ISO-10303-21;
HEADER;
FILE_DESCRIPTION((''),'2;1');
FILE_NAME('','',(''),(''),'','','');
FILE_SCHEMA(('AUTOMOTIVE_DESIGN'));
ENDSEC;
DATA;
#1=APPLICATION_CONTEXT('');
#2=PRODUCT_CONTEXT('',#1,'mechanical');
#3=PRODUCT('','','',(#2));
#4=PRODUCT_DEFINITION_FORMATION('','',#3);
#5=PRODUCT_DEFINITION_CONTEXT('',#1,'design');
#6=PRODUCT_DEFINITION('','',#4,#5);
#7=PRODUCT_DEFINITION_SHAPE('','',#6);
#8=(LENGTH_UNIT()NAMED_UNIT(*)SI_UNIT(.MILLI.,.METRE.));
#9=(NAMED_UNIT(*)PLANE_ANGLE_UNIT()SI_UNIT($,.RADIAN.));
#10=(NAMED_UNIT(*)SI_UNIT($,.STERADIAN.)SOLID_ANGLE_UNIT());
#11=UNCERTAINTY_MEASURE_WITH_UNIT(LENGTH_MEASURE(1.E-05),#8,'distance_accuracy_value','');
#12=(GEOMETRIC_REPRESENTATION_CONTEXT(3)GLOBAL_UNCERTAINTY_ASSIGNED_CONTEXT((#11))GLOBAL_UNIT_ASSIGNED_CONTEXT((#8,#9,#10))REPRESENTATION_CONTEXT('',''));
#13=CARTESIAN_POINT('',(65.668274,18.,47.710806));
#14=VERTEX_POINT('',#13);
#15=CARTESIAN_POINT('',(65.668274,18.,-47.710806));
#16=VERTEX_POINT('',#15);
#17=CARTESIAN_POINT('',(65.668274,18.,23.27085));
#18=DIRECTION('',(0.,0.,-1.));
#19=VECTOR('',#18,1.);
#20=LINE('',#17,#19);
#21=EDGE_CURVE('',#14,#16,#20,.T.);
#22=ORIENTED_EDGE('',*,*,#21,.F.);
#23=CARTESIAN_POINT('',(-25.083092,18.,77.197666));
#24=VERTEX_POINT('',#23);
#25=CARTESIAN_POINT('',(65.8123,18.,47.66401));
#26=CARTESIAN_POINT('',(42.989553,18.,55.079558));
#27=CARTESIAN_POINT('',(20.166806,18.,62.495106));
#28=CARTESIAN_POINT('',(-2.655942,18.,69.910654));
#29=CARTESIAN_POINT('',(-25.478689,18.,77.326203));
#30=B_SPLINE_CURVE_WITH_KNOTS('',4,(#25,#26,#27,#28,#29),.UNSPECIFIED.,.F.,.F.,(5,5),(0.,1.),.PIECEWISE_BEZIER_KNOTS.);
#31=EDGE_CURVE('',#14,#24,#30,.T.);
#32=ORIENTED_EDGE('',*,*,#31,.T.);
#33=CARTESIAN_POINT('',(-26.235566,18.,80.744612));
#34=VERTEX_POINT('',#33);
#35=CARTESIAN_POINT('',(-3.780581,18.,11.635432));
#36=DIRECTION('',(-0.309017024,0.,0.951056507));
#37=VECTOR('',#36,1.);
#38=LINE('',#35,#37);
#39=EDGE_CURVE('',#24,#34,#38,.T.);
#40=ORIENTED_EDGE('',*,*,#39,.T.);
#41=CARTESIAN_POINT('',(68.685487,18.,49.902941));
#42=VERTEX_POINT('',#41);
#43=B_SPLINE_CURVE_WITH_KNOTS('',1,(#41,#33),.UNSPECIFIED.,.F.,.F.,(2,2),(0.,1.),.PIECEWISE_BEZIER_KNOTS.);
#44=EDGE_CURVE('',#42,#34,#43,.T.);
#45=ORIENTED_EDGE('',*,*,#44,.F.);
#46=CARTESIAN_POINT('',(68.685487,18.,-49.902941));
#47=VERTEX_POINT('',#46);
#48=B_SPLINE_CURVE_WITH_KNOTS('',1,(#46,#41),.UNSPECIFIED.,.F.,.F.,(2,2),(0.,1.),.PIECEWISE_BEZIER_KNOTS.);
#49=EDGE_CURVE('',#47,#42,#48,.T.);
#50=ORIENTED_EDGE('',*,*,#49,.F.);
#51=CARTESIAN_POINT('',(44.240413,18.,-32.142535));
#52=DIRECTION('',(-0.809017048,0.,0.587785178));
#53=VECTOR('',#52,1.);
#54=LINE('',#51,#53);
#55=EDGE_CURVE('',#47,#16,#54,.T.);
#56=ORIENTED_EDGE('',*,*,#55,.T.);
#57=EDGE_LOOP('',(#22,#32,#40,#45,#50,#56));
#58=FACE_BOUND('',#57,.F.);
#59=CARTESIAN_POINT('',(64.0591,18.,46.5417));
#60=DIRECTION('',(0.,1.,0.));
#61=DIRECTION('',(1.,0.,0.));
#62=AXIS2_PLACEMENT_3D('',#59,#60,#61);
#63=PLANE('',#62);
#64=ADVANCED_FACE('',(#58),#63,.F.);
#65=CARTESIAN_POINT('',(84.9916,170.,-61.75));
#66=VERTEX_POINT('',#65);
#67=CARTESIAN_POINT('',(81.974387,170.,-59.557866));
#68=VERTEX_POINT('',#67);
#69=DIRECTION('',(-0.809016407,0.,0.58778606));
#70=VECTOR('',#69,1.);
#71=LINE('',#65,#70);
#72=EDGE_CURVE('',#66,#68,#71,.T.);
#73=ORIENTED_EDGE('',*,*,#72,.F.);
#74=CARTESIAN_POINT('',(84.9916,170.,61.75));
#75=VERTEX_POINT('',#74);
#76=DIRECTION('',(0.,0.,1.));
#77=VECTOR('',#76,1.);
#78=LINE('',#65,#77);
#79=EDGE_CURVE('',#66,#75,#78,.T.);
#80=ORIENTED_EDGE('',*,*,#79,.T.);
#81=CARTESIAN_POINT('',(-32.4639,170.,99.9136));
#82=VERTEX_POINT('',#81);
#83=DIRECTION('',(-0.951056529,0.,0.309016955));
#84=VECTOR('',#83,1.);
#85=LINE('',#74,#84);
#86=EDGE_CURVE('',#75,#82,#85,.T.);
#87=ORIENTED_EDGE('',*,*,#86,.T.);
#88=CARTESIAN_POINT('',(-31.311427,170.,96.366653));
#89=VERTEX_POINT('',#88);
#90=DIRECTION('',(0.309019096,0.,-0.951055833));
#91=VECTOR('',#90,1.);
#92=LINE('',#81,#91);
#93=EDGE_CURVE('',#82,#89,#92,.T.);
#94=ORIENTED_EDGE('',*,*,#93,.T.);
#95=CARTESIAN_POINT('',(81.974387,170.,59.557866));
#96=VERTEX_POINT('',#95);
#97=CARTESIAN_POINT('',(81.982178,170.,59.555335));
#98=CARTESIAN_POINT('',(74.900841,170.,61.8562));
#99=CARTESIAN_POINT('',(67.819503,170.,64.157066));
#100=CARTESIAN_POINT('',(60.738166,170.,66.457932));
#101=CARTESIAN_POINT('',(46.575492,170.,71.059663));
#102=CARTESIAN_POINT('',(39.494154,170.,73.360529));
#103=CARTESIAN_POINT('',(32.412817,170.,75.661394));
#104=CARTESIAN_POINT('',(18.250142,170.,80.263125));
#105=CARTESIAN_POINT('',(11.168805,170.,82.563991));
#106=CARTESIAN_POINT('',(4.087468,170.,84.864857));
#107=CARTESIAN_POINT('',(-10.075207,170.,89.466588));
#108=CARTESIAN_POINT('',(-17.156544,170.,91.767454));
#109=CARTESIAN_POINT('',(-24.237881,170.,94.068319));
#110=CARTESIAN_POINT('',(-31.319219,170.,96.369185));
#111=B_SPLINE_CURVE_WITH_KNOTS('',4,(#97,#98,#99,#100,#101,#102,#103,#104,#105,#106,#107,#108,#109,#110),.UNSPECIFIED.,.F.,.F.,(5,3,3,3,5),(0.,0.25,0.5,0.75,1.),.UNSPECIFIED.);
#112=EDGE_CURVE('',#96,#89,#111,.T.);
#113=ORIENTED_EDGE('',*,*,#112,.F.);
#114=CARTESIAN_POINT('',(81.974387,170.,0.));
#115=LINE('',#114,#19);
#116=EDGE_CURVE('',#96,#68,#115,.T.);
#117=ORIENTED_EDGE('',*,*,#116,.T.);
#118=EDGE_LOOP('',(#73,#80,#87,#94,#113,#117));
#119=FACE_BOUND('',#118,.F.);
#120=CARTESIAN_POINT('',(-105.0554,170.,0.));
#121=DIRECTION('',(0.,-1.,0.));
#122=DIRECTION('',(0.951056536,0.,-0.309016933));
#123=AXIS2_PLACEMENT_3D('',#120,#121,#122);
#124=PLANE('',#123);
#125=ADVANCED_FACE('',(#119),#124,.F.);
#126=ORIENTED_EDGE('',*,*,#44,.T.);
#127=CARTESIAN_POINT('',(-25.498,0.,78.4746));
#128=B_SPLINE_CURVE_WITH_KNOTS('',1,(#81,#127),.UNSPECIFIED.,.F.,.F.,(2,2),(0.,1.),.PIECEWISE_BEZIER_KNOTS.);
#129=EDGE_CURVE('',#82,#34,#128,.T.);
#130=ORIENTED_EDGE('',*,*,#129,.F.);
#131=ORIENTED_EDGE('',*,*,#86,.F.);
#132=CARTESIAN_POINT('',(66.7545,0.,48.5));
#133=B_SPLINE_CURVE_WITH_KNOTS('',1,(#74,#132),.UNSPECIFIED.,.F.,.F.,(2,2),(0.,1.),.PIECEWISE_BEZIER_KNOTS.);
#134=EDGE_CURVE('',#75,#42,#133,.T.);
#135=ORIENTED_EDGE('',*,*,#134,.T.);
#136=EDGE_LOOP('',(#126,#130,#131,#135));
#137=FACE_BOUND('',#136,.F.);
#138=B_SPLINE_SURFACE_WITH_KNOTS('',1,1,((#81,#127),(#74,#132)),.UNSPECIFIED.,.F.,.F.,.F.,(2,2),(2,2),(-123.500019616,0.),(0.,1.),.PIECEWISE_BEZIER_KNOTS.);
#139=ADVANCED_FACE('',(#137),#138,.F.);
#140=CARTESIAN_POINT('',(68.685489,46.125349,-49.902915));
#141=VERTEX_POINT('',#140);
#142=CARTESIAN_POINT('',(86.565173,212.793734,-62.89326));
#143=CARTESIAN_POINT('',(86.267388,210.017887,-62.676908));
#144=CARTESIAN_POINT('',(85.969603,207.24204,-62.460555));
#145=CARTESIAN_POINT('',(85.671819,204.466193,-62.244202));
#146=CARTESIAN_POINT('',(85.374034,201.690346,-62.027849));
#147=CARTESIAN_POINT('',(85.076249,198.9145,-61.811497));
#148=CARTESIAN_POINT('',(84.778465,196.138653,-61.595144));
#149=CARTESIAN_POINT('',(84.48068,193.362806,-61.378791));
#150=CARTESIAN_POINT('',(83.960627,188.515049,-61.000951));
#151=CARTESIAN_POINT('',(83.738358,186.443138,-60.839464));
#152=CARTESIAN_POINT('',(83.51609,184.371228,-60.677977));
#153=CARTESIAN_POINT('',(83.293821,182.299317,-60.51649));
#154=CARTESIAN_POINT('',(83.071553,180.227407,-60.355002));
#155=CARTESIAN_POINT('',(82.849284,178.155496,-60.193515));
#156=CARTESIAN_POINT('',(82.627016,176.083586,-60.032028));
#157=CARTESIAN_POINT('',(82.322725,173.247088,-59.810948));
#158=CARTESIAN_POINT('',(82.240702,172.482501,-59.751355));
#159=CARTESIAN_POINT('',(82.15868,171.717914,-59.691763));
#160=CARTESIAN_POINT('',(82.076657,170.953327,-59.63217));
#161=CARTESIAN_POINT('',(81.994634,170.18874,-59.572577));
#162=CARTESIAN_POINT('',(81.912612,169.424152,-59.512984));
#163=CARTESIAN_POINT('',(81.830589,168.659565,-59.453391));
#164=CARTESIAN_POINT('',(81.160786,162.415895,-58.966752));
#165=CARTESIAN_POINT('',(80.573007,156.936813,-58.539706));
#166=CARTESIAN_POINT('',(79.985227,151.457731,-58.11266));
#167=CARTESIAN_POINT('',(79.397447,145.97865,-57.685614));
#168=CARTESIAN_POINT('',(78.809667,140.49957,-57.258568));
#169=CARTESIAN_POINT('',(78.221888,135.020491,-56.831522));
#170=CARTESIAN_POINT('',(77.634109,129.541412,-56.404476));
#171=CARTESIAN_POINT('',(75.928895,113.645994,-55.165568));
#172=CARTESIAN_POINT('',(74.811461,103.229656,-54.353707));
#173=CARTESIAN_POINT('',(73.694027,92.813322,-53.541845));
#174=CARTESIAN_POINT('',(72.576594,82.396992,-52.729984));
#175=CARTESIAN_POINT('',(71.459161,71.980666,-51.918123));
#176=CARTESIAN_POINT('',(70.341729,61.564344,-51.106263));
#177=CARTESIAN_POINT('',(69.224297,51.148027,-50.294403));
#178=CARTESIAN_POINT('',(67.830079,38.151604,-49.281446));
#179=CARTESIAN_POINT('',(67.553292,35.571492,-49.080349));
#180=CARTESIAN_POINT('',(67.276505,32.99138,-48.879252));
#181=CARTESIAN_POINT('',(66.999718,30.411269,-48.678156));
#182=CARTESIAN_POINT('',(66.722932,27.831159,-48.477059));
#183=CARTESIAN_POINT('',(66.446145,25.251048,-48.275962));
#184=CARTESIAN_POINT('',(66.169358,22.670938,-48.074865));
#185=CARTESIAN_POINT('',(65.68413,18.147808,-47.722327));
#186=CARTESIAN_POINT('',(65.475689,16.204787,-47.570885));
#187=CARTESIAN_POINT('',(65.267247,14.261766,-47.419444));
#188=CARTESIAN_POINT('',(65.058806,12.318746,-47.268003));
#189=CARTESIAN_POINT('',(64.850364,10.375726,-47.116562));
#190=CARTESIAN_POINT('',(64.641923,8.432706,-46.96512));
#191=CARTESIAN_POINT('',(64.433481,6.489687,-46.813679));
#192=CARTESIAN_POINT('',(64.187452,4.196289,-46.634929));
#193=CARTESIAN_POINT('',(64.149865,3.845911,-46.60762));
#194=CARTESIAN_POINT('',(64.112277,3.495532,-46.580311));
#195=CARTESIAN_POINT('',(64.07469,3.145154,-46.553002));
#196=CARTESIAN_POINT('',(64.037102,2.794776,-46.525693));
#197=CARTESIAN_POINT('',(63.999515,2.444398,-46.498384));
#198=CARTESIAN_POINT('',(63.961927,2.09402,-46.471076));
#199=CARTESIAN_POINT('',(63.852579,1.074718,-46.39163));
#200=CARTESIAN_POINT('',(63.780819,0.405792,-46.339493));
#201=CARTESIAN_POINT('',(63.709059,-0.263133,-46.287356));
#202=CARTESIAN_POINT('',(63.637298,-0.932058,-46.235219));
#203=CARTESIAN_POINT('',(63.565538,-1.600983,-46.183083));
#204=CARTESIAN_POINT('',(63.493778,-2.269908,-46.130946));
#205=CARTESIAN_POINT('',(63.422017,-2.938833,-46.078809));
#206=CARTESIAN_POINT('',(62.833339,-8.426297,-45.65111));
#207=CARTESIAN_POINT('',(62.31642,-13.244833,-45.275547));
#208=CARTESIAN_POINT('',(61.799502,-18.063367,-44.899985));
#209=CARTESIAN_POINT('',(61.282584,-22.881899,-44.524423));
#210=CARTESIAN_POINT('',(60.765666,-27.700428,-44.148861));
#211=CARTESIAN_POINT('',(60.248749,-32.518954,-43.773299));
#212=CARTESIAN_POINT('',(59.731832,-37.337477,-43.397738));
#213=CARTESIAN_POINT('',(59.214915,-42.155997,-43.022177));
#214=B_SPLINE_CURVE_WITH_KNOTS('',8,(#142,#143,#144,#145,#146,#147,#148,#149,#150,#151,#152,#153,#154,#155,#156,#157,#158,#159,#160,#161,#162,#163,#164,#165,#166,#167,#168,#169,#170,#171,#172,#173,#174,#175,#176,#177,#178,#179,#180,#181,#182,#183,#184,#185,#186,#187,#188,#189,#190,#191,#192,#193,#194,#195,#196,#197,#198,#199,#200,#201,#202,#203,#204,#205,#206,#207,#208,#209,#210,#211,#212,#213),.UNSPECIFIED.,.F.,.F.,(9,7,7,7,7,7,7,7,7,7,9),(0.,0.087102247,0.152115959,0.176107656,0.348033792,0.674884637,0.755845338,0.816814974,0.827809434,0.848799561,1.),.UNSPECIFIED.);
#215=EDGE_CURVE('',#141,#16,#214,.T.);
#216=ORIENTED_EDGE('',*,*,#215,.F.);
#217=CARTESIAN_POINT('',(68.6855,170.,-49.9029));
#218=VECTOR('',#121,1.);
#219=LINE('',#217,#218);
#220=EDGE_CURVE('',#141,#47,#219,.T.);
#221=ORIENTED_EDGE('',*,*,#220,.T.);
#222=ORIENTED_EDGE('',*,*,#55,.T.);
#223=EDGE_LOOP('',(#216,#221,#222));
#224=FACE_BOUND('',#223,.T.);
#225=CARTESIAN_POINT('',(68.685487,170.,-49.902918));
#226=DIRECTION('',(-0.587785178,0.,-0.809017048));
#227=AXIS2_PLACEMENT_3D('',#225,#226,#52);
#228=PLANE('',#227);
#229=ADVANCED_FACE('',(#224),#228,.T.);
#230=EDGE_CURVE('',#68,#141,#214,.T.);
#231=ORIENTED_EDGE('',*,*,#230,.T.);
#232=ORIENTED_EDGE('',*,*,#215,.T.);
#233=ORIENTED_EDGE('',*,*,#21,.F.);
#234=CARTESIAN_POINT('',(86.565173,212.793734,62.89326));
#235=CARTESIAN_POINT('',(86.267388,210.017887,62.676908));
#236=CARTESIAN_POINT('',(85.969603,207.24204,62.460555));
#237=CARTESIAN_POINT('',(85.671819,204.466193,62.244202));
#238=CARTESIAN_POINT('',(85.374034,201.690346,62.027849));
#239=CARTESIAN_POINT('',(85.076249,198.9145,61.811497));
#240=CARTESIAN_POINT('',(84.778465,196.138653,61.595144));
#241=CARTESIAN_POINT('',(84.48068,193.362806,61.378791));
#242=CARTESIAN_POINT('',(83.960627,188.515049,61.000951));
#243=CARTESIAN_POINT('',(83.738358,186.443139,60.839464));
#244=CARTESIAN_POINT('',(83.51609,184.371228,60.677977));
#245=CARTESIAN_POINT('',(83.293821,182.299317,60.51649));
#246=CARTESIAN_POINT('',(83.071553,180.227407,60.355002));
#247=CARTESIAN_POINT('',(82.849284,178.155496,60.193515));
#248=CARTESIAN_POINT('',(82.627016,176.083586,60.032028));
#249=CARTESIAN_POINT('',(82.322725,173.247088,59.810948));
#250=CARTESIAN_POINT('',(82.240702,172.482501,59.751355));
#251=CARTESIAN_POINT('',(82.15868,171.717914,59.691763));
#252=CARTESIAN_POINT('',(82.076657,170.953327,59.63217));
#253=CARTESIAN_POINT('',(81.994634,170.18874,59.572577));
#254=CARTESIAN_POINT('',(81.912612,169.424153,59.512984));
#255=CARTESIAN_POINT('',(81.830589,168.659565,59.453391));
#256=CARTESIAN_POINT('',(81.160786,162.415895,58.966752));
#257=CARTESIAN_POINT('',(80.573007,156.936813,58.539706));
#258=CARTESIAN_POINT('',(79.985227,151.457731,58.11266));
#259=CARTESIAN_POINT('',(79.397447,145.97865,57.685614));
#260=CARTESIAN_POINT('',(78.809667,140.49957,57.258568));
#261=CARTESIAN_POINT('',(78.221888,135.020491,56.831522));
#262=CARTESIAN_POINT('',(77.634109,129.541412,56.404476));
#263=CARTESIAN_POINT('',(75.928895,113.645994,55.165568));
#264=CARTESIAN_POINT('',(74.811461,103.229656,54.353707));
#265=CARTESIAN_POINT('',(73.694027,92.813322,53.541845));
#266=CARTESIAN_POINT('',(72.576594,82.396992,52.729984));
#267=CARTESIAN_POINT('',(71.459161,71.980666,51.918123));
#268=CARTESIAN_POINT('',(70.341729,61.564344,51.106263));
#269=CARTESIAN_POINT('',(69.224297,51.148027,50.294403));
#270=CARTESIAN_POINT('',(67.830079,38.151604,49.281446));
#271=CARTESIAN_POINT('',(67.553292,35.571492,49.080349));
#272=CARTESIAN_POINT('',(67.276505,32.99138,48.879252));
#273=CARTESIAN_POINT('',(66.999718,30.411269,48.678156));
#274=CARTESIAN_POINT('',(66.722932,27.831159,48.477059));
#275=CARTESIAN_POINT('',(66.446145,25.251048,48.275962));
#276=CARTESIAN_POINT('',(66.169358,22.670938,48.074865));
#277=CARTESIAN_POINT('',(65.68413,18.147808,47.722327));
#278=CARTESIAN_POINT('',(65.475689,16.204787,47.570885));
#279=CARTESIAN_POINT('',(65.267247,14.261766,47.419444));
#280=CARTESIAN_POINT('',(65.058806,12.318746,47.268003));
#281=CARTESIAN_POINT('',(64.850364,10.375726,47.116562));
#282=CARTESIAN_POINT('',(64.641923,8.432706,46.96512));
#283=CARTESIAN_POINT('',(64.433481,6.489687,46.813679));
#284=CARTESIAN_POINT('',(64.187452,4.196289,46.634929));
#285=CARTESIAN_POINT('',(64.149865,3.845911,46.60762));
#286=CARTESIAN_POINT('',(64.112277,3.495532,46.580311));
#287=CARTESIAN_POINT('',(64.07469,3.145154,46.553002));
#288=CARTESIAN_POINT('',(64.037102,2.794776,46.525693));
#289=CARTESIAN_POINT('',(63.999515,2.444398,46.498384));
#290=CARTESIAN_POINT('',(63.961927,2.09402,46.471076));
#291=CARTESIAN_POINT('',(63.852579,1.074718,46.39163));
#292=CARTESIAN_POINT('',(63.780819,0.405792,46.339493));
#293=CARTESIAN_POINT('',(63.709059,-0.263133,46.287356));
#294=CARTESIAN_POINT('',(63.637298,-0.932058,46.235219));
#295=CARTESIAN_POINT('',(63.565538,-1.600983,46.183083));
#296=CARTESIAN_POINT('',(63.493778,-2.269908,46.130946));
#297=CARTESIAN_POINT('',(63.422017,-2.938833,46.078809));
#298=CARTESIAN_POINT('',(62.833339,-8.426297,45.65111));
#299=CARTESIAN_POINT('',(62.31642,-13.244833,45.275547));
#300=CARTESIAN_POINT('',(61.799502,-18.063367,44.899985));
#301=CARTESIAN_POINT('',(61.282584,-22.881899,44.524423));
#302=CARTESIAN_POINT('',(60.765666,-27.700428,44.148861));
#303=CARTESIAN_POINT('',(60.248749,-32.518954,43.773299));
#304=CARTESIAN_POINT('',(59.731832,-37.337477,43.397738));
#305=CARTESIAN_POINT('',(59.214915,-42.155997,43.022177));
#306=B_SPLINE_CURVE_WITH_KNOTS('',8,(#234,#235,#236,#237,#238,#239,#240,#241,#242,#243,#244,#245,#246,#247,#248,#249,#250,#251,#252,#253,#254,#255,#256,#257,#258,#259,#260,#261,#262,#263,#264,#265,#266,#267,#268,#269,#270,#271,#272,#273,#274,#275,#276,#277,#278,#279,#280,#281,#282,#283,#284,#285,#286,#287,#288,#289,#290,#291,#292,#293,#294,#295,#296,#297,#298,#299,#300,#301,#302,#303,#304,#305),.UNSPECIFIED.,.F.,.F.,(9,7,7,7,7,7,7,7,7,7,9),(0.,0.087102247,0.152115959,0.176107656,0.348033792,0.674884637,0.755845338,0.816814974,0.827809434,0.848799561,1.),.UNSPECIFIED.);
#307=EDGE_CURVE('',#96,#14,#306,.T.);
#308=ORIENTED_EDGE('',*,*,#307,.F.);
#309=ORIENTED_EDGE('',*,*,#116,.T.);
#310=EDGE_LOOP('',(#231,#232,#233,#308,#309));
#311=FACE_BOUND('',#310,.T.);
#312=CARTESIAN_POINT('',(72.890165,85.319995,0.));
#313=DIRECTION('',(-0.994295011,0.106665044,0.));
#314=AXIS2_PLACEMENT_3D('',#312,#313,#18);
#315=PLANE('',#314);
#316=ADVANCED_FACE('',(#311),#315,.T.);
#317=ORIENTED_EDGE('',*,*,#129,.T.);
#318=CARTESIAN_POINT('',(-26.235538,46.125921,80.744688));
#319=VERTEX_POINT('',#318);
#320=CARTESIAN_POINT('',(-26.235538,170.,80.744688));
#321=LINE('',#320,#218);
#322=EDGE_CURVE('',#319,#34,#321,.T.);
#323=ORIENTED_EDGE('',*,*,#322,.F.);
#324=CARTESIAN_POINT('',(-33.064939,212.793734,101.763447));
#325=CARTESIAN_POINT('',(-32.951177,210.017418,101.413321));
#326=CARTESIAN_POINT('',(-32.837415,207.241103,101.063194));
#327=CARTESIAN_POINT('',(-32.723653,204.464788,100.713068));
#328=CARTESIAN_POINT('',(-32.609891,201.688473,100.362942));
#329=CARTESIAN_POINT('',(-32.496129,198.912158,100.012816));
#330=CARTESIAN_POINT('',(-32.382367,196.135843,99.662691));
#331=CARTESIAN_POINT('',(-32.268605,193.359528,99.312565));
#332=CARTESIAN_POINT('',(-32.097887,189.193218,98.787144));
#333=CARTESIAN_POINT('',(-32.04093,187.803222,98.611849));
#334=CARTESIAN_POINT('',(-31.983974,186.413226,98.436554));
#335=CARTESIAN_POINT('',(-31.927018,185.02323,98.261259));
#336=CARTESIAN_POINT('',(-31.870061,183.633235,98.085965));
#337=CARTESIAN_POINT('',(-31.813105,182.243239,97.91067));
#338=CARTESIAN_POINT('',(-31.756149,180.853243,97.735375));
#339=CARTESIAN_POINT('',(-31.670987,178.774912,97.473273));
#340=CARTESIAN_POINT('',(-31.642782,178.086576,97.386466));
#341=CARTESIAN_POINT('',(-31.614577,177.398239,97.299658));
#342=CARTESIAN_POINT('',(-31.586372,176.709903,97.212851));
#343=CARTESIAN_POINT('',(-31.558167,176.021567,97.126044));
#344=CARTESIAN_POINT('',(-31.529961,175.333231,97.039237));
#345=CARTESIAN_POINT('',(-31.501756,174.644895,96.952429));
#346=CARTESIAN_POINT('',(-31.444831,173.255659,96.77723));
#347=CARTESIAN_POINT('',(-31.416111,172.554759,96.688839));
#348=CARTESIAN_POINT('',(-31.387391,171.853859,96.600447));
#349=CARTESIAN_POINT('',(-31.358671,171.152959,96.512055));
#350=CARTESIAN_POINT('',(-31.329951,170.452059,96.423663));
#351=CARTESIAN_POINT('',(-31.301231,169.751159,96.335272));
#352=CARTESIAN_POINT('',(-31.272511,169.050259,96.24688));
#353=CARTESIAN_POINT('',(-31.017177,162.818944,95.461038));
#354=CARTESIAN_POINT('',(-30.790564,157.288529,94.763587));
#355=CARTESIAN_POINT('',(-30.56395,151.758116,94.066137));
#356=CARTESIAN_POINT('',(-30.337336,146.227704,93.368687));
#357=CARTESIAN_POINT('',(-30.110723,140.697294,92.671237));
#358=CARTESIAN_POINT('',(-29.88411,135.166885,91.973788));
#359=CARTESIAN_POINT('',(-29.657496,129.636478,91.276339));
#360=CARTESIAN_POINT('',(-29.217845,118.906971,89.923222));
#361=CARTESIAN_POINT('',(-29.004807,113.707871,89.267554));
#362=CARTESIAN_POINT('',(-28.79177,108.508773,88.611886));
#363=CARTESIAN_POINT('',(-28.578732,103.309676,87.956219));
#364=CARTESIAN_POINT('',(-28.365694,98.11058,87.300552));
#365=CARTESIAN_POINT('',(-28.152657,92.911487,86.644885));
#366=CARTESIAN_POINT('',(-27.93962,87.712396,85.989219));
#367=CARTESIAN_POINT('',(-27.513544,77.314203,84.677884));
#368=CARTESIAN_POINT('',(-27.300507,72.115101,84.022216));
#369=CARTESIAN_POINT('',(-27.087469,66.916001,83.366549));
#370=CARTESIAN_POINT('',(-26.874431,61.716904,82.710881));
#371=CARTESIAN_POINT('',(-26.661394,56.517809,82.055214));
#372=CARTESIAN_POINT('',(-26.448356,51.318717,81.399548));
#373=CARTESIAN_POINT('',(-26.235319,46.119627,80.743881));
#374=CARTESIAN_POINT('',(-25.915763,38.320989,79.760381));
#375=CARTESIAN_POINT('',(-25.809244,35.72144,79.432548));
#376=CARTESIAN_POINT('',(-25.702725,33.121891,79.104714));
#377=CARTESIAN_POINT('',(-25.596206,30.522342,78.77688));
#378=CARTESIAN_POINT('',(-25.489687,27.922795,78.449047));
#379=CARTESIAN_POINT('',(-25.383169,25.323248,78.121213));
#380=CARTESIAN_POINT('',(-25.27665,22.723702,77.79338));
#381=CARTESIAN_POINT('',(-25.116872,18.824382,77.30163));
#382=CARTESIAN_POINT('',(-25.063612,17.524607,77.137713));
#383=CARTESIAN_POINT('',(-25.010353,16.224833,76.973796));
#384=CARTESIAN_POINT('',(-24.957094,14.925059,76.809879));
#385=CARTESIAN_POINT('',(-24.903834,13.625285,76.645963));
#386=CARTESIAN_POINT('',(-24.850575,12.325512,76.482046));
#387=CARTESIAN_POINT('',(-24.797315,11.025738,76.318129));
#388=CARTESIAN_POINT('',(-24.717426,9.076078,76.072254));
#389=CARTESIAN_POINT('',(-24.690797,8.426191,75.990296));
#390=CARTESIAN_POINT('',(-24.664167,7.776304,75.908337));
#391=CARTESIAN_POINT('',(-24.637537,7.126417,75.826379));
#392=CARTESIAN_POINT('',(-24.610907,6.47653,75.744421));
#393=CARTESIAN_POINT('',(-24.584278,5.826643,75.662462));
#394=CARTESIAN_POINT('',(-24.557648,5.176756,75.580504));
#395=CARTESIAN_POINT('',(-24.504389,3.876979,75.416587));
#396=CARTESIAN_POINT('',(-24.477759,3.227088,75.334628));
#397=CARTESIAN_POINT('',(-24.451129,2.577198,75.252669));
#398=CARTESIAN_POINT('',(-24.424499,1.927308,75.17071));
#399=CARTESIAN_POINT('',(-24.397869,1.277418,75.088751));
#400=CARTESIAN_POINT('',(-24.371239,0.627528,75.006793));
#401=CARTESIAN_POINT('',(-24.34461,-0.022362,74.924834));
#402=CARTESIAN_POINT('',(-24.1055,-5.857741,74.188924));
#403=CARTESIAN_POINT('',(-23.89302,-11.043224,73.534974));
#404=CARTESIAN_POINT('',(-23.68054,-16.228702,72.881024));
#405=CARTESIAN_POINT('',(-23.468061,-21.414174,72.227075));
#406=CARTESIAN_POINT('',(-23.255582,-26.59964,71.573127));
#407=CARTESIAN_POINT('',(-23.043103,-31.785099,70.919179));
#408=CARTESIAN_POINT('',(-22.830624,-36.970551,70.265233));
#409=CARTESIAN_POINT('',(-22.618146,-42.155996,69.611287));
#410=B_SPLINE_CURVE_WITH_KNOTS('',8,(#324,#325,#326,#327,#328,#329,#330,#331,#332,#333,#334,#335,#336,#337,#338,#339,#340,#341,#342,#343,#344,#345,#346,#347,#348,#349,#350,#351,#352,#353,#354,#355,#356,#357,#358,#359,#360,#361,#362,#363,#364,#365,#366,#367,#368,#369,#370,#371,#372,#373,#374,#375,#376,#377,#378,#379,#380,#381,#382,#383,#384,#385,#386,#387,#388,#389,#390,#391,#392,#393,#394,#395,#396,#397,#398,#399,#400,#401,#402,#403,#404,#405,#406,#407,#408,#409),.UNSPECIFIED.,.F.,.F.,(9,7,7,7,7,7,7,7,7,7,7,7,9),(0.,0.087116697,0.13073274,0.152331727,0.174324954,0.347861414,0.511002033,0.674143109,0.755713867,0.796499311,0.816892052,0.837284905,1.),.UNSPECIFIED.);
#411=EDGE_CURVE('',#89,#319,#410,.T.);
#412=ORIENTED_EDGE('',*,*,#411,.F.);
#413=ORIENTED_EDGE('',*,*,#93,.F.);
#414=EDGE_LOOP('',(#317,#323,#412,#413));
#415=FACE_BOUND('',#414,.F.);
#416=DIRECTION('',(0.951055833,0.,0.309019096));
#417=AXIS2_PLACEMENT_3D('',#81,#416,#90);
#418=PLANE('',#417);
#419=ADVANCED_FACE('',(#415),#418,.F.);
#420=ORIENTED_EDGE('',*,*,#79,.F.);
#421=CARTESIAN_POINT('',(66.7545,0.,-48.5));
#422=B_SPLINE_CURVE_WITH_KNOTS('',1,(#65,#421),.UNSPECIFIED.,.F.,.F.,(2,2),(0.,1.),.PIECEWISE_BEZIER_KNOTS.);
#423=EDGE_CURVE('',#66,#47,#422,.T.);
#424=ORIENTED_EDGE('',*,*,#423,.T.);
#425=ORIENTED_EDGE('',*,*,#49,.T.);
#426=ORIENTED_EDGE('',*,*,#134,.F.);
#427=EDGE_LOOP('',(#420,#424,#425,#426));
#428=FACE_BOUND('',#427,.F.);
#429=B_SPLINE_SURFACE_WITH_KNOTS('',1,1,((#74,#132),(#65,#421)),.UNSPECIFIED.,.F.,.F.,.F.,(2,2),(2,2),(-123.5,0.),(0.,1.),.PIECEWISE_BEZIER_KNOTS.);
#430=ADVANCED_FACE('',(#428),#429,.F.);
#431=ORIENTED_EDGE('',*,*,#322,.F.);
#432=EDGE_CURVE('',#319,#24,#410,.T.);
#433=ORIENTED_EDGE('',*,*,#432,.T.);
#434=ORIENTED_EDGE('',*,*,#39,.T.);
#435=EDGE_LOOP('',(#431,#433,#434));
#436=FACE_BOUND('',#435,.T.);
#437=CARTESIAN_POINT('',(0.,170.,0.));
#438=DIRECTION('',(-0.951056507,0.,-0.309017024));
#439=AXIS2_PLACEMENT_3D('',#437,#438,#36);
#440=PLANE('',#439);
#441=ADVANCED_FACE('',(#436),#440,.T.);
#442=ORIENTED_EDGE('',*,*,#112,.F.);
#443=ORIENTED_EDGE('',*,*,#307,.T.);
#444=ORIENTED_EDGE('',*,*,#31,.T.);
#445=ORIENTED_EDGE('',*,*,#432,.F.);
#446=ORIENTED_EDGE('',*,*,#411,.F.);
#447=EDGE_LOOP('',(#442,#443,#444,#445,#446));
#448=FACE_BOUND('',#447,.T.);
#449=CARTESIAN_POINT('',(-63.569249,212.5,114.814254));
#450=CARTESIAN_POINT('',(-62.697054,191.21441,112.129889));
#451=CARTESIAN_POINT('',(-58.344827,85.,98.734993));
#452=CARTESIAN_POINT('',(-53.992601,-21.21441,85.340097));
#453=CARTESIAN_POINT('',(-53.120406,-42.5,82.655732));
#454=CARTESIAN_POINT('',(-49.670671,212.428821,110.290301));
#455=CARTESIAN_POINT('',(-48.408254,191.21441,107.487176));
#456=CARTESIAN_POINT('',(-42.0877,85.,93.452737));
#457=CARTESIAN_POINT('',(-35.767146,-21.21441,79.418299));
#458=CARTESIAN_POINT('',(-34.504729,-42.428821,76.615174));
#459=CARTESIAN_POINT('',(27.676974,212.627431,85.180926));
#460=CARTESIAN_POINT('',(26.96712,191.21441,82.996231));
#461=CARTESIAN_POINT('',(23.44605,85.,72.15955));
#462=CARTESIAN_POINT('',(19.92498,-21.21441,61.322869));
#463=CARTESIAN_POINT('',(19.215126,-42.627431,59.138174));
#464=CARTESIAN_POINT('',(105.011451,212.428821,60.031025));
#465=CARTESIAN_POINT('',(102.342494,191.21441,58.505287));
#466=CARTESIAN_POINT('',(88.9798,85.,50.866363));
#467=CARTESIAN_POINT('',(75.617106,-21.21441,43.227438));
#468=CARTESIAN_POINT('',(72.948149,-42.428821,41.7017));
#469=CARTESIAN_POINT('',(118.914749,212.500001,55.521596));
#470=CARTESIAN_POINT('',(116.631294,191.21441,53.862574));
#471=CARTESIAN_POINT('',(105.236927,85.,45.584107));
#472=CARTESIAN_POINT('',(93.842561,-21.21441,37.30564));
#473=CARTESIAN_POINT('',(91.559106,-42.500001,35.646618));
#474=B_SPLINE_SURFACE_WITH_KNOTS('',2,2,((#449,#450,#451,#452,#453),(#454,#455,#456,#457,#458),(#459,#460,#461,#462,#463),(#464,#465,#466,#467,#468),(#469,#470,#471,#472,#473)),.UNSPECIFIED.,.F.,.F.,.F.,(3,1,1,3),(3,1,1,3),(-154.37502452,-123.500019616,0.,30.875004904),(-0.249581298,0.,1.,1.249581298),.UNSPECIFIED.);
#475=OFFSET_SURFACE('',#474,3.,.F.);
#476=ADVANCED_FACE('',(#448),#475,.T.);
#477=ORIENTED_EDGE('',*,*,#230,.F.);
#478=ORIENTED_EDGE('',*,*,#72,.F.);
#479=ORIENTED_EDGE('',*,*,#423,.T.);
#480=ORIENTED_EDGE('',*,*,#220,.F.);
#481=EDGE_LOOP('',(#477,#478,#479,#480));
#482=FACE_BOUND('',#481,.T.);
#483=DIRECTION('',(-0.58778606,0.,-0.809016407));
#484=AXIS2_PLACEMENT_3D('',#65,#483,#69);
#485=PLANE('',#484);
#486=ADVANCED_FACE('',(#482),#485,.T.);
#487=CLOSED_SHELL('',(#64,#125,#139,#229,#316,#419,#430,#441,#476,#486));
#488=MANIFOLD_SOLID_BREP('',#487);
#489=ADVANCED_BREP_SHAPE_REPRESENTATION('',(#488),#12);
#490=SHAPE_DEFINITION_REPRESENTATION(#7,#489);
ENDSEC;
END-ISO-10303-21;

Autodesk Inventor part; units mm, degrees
sketch "草图1" plane through (0, 0, 0) normal (0, 1, 0) x (-1, 0, 0)
  line L0 (82.5131, 0) -> (25.498, -78.4746)
  line L1 (25.498, -78.4746) -> (-66.7545, -48.5)
  line L2 (-66.7545, -48.5) -> (-66.7545, 48.5)
  line L3 (-66.7545, 48.5) -> (25.498, 78.4746)
  line L4 (25.498, 78.4746) -> (82.5131, 0)
  point P0 (0, 0)
  point P1 (0, 0)
  dimension "d0" = 97
ref_plane "工作平面1" through (0, 170, 0) normal (0, 1, 0) x (-1, 0, 0)
sketch "草图2" plane through (0, 170, 0) normal (0, 1, 0) x (-1, 0, 0)
  line L0 (105.0554, 0) -> (32.4639, -99.9136)
  line L1 (32.4639, -99.9136) -> (-84.9916, -61.75)
  line L2 (-84.9916, -61.75) -> (-84.9916, 61.75)
  line L3 (-84.9916, 61.75) -> (32.4639, 99.9136)
  line L4 (32.4639, 99.9136) -> (105.0554, 0)
  point P0 (0, 0)
  point P1 (0, 0)
  dimension "d2" = 123.5
loft "放样1" add profiles "草图2", "草图1"
sketch "草图3" plane through (84.9916, 170, 61.75) normal (0, 1, 0) x (1, 0, 0)
  line L0 (-153.2988, 61.75) -> (-106.0997, 126.7141)
  line L1 (-106.0997, 126.7141) -> (-29.7298, 101.9)
  line L2 (-29.7298, 101.9) -> (-29.7298, 21.6)
  line L3 (-29.7298, 21.6) -> (-106.0997, -3.2141)
  line L4 (-106.0997, -3.2141) -> (-153.2988, 61.75)
  point P0 (-84.9916, 61.75)
  point P1 (-84.9916, 61.75)
  dimension "d7" = 80.3
extrude "拉伸1" cut sketch "草图3" against normal blind 164
shell "抽壳1" thickness 3 removed faces 1 at (10.4732, 170, -75.5426)
sketch "草图5" plane through (66.7545, 0, -48.5) normal (0, -1, 0) x (1, 0, 0)
  line L0 (-98.0659, 144.8667) -> (-91.2229, 123.806) projected
  line L1 (-106.5917, 71.5) -> (-123.9122, 81.5)
  line L2 (-107.7408, 69.3836) -> (-125.561, 78.4634)
  arc A0 (-106.5917, 71.5) -> (-107.7408, 69.3836) centre (-66.7545, 48.5) ccw
  arc A1 (-123.9122, 81.5) -> (-125.561, 78.4634) centre (-66.7545, 48.5) ccw
  point P0 (-99.2814, 81.0269)
  dimension "d37" = 132
  dimension "d38" = 92
  dimension "d40" = 3
extrude "拉伸2" add sketch "草图5" along normal blind 3
sketch "草图7" plane through (66.7545, -3, -48.5) normal (0, -1, 0) x (1, 0, 0)
  arc A0 (-100.9392, 79.28) -> (-106.5917, 71.5) centre (-66.7545, 48.5) ccw
  arc A1 (-115.8021, 92.6626) -> (-125.561, 78.4634) centre (-66.7545, 48.5) ccw
  arc A2 (-100.9392, 79.28) -> (-107.7408, 69.3836) centre (-66.7545, 48.5) ccw
  line L0 (-100.9392, 79.28) -> (-115.8021, 92.6626)
  line L1 (-125.561, 78.4634) -> (-107.7408, 69.3836) projected
  line L2 (-107.7408, 69.3836) -> (-125.561, 78.4634)
  dimension "d25" = 92
  dimension "d41" = 15
extrude "拉伸3" add sketch "草图7" along normal blind 3
chamfer "倒角1" distance 1 angle 45 1 edges at (-41.6161, -3, 37.4713)
sketch "草图8" plane through (66.7545, 0, -48.5) normal (0, -1, 0) x (1, 0, 0)
  circle A0 centre (-66.7545, 48.5) radius 15
  dimension "d100" = 30
extrude "拉伸4" add sketch "草图8" along normal blind 30
pattern_circular "环形阵列1" count 10 over 360 about axis through (0, -10, 0) along (0, 1, 0) of "拉伸3", "拉伸2", "倒角1"
sketch "草图9" plane through (64.0591, 3, 46.5417) normal (0, 1, 0) x (1, 0, 0)
  line L0 (-132.3664, 46.5417) -> (-85.1672, 111.5058) projected
  line L1 (-85.1672, -18.4224) -> (-132.3664, 46.5417) projected
  line L2 (-8.7974, 6.3917) -> (-85.1672, -18.4224) projected
  line L3 (-8.7974, 86.6917) -> (-8.7974, 6.3917) projected
  line L4 (-85.1672, 111.5058) -> (-8.7974, 86.6917) projected
  line L5 (-136.0746, 46.5417) -> (-86.3131, -21.9491) projected
  line L6 (-86.3131, -21.9491) -> (-5.7974, 4.2121) projected
  line L7 (-5.7974, 4.2121) -> (-5.7974, 88.8713) projected
  line L8 (-5.7974, 88.8713) -> (-86.3131, 115.0325) projected
  line L9 (-86.3131, 115.0325) -> (-136.0746, 46.5417) projected
  line L10 (-85.1672, -18.4224) -> (-132.3664, 46.5417) projected
  line L11 (-132.3664, 46.5417) -> (-85.1672, 111.5058) projected
  line L12 (-85.1672, 111.5058) -> (-8.7974, 86.6917) projected
  line L13 (-8.7974, 86.6917) -> (-8.7974, 6.3917) projected
  line L14 (-8.7974, 6.3917) -> (-85.1672, -18.4224) projected
  line L15 (-143.2406, 46.5417) -> (-88.5276, 121.8477) projected
  line L16 (-88.5276, -28.7643) -> (-143.2406, 46.5417) projected
  line L17 (0, 0) -> (-88.5276, -28.7643) projected
  line L18 (0, 93.0834) -> (0, 0) projected
  line L19 (-88.5276, 121.8477) -> (0, 93.0834) projected
  line L20 (-145.4076, 46.5417) -> (-89.1972, 123.9087)
  line L21 (-89.1972, 123.9087) -> (1.7532, 94.3571)
  line L22 (1.7532, 94.3571) -> (1.7532, -1.2738)
  line L23 (1.7532, -1.2738) -> (-89.1972, -30.8253)
  line L24 (-89.1972, -30.8253) -> (-145.4076, 46.5417)
  point P0 (-64.0591, 46.5417)
extrude "拉伸5" add sketch "草图9" along normal blind 15 contours L15 L19 L18 L17 L16 | L20 L21 L22 L23 L24
sketch "草图10" plane through (84.9916, 6, 61.75) normal (0, 1, 0) x (1, 0, 0)
  line L0 (-153.2988, 61.75) -> (-106.0997, 126.7141) projected
  line L1 (-106.0997, -3.2141) -> (-153.2988, 61.75) projected
  line L2 (-29.7298, 21.6) -> (-106.0997, -3.2141) projected
  line L3 (-29.7298, 101.9) -> (-29.7298, 21.6) projected
  line L4 (-106.0997, 126.7141) -> (-29.7298, 101.9) projected
  line L5 (-107.2456, 130.2408) -> (-157.007, 61.75) projected
  line L6 (-26.7298, 104.0796) -> (-107.2456, 130.2408) projected
  line L7 (-26.7298, 19.4204) -> (-26.7298, 104.0796) projected
  line L8 (-107.2456, -6.7408) -> (-26.7298, 19.4204) projected
  line L9 (-157.007, 61.75) -> (-107.2456, -6.7408) projected
  line L10 (-166.1621, 61.75) -> (-110.0746, 138.9477) projected
  line L11 (-110.0746, -15.4477) -> (-166.1621, 61.75) projected
  line L12 (-19.3233, 14.0392) -> (-110.0746, -15.4477) projected
  line L13 (-19.3233, 109.4608) -> (-19.3233, 14.0392) projected
  line L14 (-110.0746, 138.9477) -> (-19.3233, 109.4608) projected
  point P0 (-84.9916, 61.75)
sketch "草图11" plane through (64.0591, 18, 46.5417) normal (0, 1, 0) x (1, 0, 0)
  line L0 (-64.0591, 46.5417) -> (2.6954, 46.5417) construction
  line L1 (-86.3131, 115.0325) -> (-136.0746, 46.5417) projected
  line L2 (-5.7974, 88.8713) -> (-86.3131, 115.0325) projected
  line L3 (-5.7974, 4.2121) -> (-5.7974, 88.8713) projected
  line L4 (-86.3131, -21.9491) -> (-5.7974, 4.2121) projected
  line L5 (-136.0746, 46.5417) -> (-86.3131, -21.9491) projected
  line L6 (-145.2296, 46.5417) -> (-89.1422, 123.7394) projected
  line L7 (-89.1422, -30.656) -> (-145.2296, 46.5417) projected
  line L8 (1.6092, -1.1691) -> (-89.1422, -30.656) projected
  line L9 (1.6092, 94.2525) -> (1.6092, -1.1691) projected
  line L10 (-89.1422, 123.7394) -> (1.6092, 94.2525) projected
  circle A0 centre (-2.0908, 11.2121) radius 1.25
  line L11 (-5.7974, 4.2121) -> (1.6092, -1.1691) construction
  line L12 (-5.7974, 4.2121) -> (-5.7974, 88.8713) projected
  line L13 (-86.3131, -21.9491) -> (-5.7974, 4.2121) projected
  line L14 (1.6092, -1.1691) -> (-89.1422, -30.656) projected
  line L15 (1.6092, 94.2525) -> (1.6092, -1.1691) projected
  circle A1 centre (-11.3094, -1.4762) radius 1.25
  line L16 (-2.0941, 7.5215) -> (-0.5941, 7.5215)
  line L17 (-0.5941, 7.5215) -> (-0.5941, 0.4317)
  line L18 (-2.0941, 7.5215) -> (-3.5941, 7.5215)
  line L19 (-3.5941, 7.5215) -> (-3.5941, 2.6113)
  line L20 (-7.8005, -0.3326) -> (-7.3369, -1.7592)
  line L21 (-7.3369, -1.7592) -> (-0.5941, 0.4317)
  line L22 (-7.8005, -0.3326) -> (-8.264, 1.094)
  line L23 (-8.264, 1.094) -> (-3.5941, 2.6113)
  dimension "d63" = 2.5
  dimension "d69" = 3.7
  dimension "d131" = 3.6906
extrude "拉伸7" cut sketch "草图11" against normal blind 3 contours A0 | A1 | L16 L17 L21 L20 L22 L23 L19 L18
extrude "拉伸8" add sketch "草图10" along normal blind 10 and the other way blind 3 contours L10 L14 L13 L12 L11
extrude "拉伸9" cut sketch "草图10" along normal blind 10 and the other way blind 3 contours L10 L14 L13 L12 L11
ref_plane "工作平面2" through (84.9916, 7, 61.75) normal (0, 1, 0) x (1, 0, 0)
sketch "草图12" plane through (84.9916, 7, 61.75) normal (0, 1, 0) x (1, 0, 0)
  line L0 (-107.2456, -6.7408) -> (-26.7298, 19.4204) projected
  line L1 (-60.7054, 8.3811) -> (-61.6324, 11.2342)
  line L2 (-29.7298, 21.6) -> (-106.0997, -3.2141) projected
  line L3 (-89.8404, 2.0689) -> (-88.9133, -0.7843)
  line L4 (-107.2456, -6.7408) -> (-26.7298, 19.4204) projected
  line L5 (-29.7298, 21.6) -> (-106.0997, -3.2141) projected
  line L6 (-63.5345, 10.6162) -> (-62.6075, 7.763)
  line L7 (-65.4366, 9.9982) -> (-64.5096, 7.145)
  line L8 (-67.3388, 9.3801) -> (-66.4117, 6.527)
  line L9 (-69.2409, 8.7621) -> (-68.3138, 5.9089)
  line L10 (-71.143, 8.1441) -> (-70.2159, 5.2909)
  line L11 (-73.0451, 7.526) -> (-72.118, 4.6729)
  line L12 (-74.9472, 6.908) -> (-74.0202, 4.0548)
  line L13 (-76.7905, 6.3091) -> (-75.7638, 3.4883)
  line L14 (-84.134, 3.923) -> (-83.207, 1.0698)
  line L15 (-86.0362, 3.305) -> (-85.1091, 0.4518)
  line L16 (-87.9383, 2.6869) -> (-87.0112, -0.1662)
  line L17 (-80.3298, 5.1591) -> (-79.4028, 2.3059)
  line L18 (-82.2319, 4.541) -> (-81.3049, 1.6879)
  line L19 (-78.4277, 5.7771) -> (-77.5006, 2.9239)
  line L20 (-61.6324, 11.2342) -> (-63.5345, 10.6162)
  line L21 (-62.6075, 7.763) -> (-60.7054, 8.3811)
  line L22 (-66.4117, 6.527) -> (-64.5096, 7.145)
  line L23 (-65.4366, 9.9982) -> (-67.3388, 9.3801)
  line L24 (-70.2159, 5.2909) -> (-68.3138, 5.9089)
  line L25 (-69.2409, 8.7621) -> (-71.143, 8.1441)
  line L26 (-74.0202, 4.0548) -> (-72.118, 4.6729)
  line L27 (-73.0451, 7.526) -> (-74.9472, 6.908)
  line L28 (-76.7905, 6.3091) -> (-78.4277, 5.7771)
  line L29 (-77.5006, 2.9239) -> (-75.7638, 3.4883)
  line L30 (-81.3049, 1.6879) -> (-79.4028, 2.3059)
  line L31 (-80.3298, 5.1591) -> (-82.2319, 4.541)
  line L32 (-84.134, 3.923) -> (-86.0362, 3.305)
  line L33 (-87.9383, 2.6869) -> (-89.8404, 2.0689)
  line L34 (-88.9133, -0.7843) -> (-87.0112, -0.1662)
  line L35 (-85.1091, 0.4518) -> (-83.207, 1.0698)
  line L36 (-58.8033, 8.9991) -> (-59.7303, 11.8523)
  line L37 (-56.9011, 9.6171) -> (-57.8282, 12.4703)
  line L38 (-54.999, 10.2352) -> (-55.9261, 13.0883)
  line L39 (-53.0969, 10.8532) -> (-54.024, 13.7064)
  point P0 (-84.9916, 61.75)
  dimension "d73" = 2
  dimension "d74" = 2
  dimension "d75" = 2
  dimension "d76" = 2
  dimension "d77" = 2
  dimension "d78" = 2
  dimension "d79" = 2
  dimension "d80" = 2
  dimension "d81" = 2
  dimension "d82" = 2
  dimension "d83" = 2
  dimension "d84" = 2
  dimension "d85" = 2
  dimension "d86" = 2
  dimension "d88" = 2
  dimension "d89" = 2
  dimension "d90" = 2
  dimension "d91" = 2
extrude "拉伸10" cut sketch "草图12" along normal blind 7 contours L3 L2 L16 L0 | L15 L2 L14 L0 | L18 L2 L17 L0 | L19 L2 L13 L0 | L12 L2 L11 L0 | L10 L2 L9 L0 | L8 L2 L7 L0 | L6 L2 L1 L0 | L36 L2 L37 L0 | L38 L2 L39 L0
pattern_circular "环形阵列2" count 5 over 360 about axis through (0, 0, 0) along (0, -1, 0) of "拉伸10"
sketch "草图13" plane through (66.7545, 0, -48.5) normal (0, -1, 0) x (1, 0, 0)
  line L0 (1.9326, 98.4258) -> (-1.1068, 96.2175) construction
  line L1 (18.2371, 110.25) -> (0, 97) construction
  line L2 (-16.2555, 104.3138) -> (1.9326, 98.4258)
  line L3 (1.9326, 98.4258) -> (1.9326, 79.28)
  line L4 (-14.6399, 100.6147) -> (-1.1068, 96.2175)
  line L5 (-1.0862, 96.2108) -> (-1.0862, 81.9597)
  line L6 (-1.0862, 81.9597) -> (1.9326, 79.28)
  line L7 (-14.6399, 100.6147) -> (-16.2555, 104.3138)
  line L8 (1.9326, 98.4258) -> (1.9326, 79.28)
  line L9 (1.9326, 79.28) -> (-1.0862, 81.9597)
  line L10 (-1.0862, 0.7892) -> (-1.0862, 96.2108) projected
  line L11 (-1.0862, 81.9597) -> (-1.0862, 96.2108)
  line L12 (-1.0862, 96.2108) -> (-14.6399, 100.6147)
  line L13 (-91.8376, 125.6977) -> (-1.0862, 96.2108) projected
  line L14 (0, 97) -> (-92.2525, 126.9746) projected
  line L15 (-14.6399, 100.6147) -> (-16.2555, 104.3138)
  line L16 (-16.2555, 104.3138) -> (1.9326, 98.4258)
  point P0 (-66.7545, 48.5)
  point P1 (18.2371, 110.25)
extrude "拉伸11" cut sketch "草图13" against normal blind 16
sketch "草图14" plane through (0, -30, 0) normal (0, -1, 0) x (1, 0, 0)
  line L0 (11.4602, -0.9019) -> (-11.5398, -0.9019)
  line L1 (-11.5398, -0.9019) -> (-11.5398, 0.7981)
  line L2 (-11.5398, 0.7981) -> (11.4602, 0.7981)
  line L3 (11.4602, 0.7981) -> (11.4602, -0.9019)
  line L4 (15.9292, -0.0519) -> (-16.622, -0.0519) construction
  line L5 (-0.0398, 4.6584) -> (-0.0398, -5.7431) construction
  point P0 (0, 0)
  dimension "d94" = 23
  dimension "d95" = 1.7
extrude "拉伸12" cut sketch "草图14" along normal blind 10 and the other way blind 54.75
sketch "草图15" plane through (0, -30, 0) normal (0, -1, 0) x (1, 0, 0)
  line L0 (11.4602, 0.7981) -> (-11.5398, 0.7981) projected
  line L1 (9.9602, 0.7981) -> (-10.0398, 0.7981)
  line L2 (-10.0398, 0.7981) -> (-10.0398, 2.5981)
  line L3 (-10.0398, 2.5981) -> (9.9602, 2.5981)
  line L4 (9.9602, 2.5981) -> (9.9602, 0.7981)
  line L5 (11.4602, -0.9019) -> (-11.5398, -0.9019) projected
  line L6 (-0.0398, 30.3943) -> (-0.0398, -31.216) construction
  point P0 (0, 0)
  dimension "d101" = 3.5
  dimension "d102" = 20
extrude "拉伸13" cut sketch "草图15" against normal blind 30
sketch "草图16" plane through (0, -30, 0) normal (0, -1, 0) x (1, 0, 0)
  line L0 (11.4602, 0.7981) -> (-11.5398, 0.7981) projected
  line L1 (-5.5398, 0.7981) -> (5.4602, 0.7981)
  line L2 (5.4602, 0.7981) -> (5.4602, 6.5981)
  line L3 (5.4602, 6.5981) -> (-5.5398, 6.5981)
  line L4 (-5.5398, 6.5981) -> (-5.5398, 0.7981)
  line L5 (11.4602, -0.9019) -> (-11.5398, -0.9019) projected
  line L6 (-0.0398, 25.7819) -> (-0.0398, -22.2478) construction
  point P0 (0, 0)
  dimension "d105" = 7.5
  dimension "d106" = 11
extrude "拉伸14" cut sketch "草图16" against normal blind 6
ref_plane "工作平面3" through (0, -28, 0) normal (0, -1, 0) x (1, 0, 0)
sketch "草图18" plane through (0, -28, 0) normal (0, -1, 0) x (1, 0, 0)
  line L0 (5.4602, 6.5981) -> (5.4602, 2.5981) projected
  line L1 (5.4602, 2.5981) -> (9.9602, 2.5981) projected
  line L2 (9.9602, 2.5981) -> (9.9602, 0.7981) projected
  line L3 (9.9602, 0.7981) -> (11.4602, 0.7981) projected
  line L4 (11.4602, 0.7981) -> (11.4602, -0.9019) projected
  line L5 (11.4602, -0.9019) -> (-11.5398, -0.9019) projected
  line L6 (-11.5398, -0.9019) -> (-11.5398, 0.7981) projected
  line L7 (-11.5398, 0.7981) -> (-10.0398, 0.7981) projected
  line L8 (-10.0398, 0.7981) -> (-10.0398, 2.5981) projected
  line L9 (-10.0398, 2.5981) -> (-5.5398, 2.5981) projected
  line L10 (-5.5398, 2.5981) -> (-5.5398, 6.5981) projected
  line L11 (-5.5398, 6.5981) -> (5.4602, 6.5981) projected
  circle A0 centre (0, 0) radius 15 projected
  line L12 (-12.5398, -1.9019) -> (12.4602, -1.9019)
  line L13 (12.4602, -1.9019) -> (12.4602, 1.7981)
  line L14 (12.4602, 1.7981) -> (10.9602, 1.7981)
  line L15 (10.9602, 1.7981) -> (10.9602, 3.5981)
  line L16 (10.9602, 3.5981) -> (6.4602, 3.5981)
  line L17 (6.4602, 3.5981) -> (6.4602, 7.5981)
  line L18 (6.4602, 7.5981) -> (-6.5398, 7.5981)
  line L19 (-6.5398, 7.5981) -> (-6.5398, 3.5981)
  line L20 (-6.5398, 3.5981) -> (-11.0398, 3.5981)
  line L21 (-11.0398, 3.5981) -> (-11.0398, 1.7981)
  line L22 (-11.0398, 1.7981) -> (-12.5398, 1.7981)
  line L23 (-12.5398, 1.7981) -> (-12.5398, -1.9019)
  circle A1 centre (0, 0) radius 14
  point P0 (0, 0)
  dimension "d110" = 1
  dimension "d111" = 1
extrude "拉伸15" cut sketch "草图18" against normal blind 30 contours A1
sketch "草图19" plane through (66.7545, 0, -48.5) normal (0, -1, 0) x (1, 0, 0)
  line L0 (-60.2943, 56.0981) -> (-73.2943, 56.0981) projected
  line L1 (-73.2943, 52.0981) -> (-77.7943, 52.0981) projected
  line L2 (-60.2943, 56.0981) -> (-73.2943, 56.0981)
  line L3 (-73.2943, 56.0981) -> (-73.2943, 52.0981)
  line L4 (-73.2943, 52.0981) -> (-60.2943, 52.0981)
  line L5 (-60.2943, 52.0981) -> (-60.2943, 56.0981)
  point P0 (-66.7545, 48.5)
extrude "拉伸16" cut sketch "草图19" along normal blind 22 and the other way blind 2
sketch "草图21" plane through (0, -30, 0) normal (0, -1, 0) x (1, 0, 0)
  line L0 (5.4602, 6.5981) -> (5.4602, 2.5981) projected
  line L1 (5.4602, 2.5981) -> (9.9602, 2.5981) projected
  line L2 (9.9602, 2.5981) -> (9.9602, 0.7981) projected
  line L3 (9.9602, 0.7981) -> (11.4602, 0.7981) projected
  line L4 (11.4602, 0.7981) -> (11.4602, -0.9019) projected
  line L5 (11.4602, -0.9019) -> (-11.5398, -0.9019) projected
  line L6 (-11.5398, -0.9019) -> (-11.5398, 0.7981) projected
  line L7 (-11.5398, 0.7981) -> (-10.0398, 0.7981) projected
  line L8 (-10.0398, 0.7981) -> (-10.0398, 2.5981) projected
  line L9 (-10.0398, 2.5981) -> (-5.5398, 2.5981) projected
  line L10 (-5.5398, 2.5981) -> (-5.5398, 6.5981) projected
  line L11 (-5.5398, 6.5981) -> (5.4602, 6.5981) projected
  circle A0 centre (0, 0) radius 15 projected
  point P0 (0, 0)
extrude "拉伸17" add sketch "草图21" along normal blind 3
sketch "草图22" plane through (5.4602, -24, 6.5981) normal (0, 0, -1) x (-1, 0, 0)
  line L0 (9.1141, -4) -> (1.9525, -4)
  line L1 (1.9525, -4) -> (9.1141, -4)
  line L2 (9.1141, -4) -> (9.1141, -9.2971)
  line L3 (9.1141, -9.2971) -> (1.9525, -9.2971)
  line L4 (1.9525, -9.2971) -> (1.9525, -4)
  point P0 (5.4602, 24)
extrude "拉伸18" cut sketch "草图22" against normal blind 10
sketch "草图23" plane through (0, -33, 0) normal (0, -1, 0) x (1, 0, 0)
  line L0 (5.555, -0.8779) -> (-5.9531, -0.8779)
  line L1 (-5.9531, -0.8779) -> (-5.9531, -3.3779)
  line L2 (-5.9531, -3.3779) -> (5.555, -3.3779)
  line L3 (5.555, -3.3779) -> (5.555, -0.8779)
  point P0 (0, 0)
  dimension "d125" = 2.5
extrude "拉伸19" cut sketch "草图23" against normal blind 10
sketch "草图24" plane through (64.0591, 18, 46.5417) normal (0, 1, 0) x (1, 0, 0)
  line L0 (-75.5989, 45.7436) -> (-75.5989, 47.4436) projected
  line L1 (-75.5989, 47.4436) -> (-52.5989, 47.4436) projected
  line L2 (-52.5989, 47.4436) -> (-52.5989, 45.7436) projected
  line L3 (-52.5989, 45.7436) -> (-75.5989, 45.7436) projected
  line L4 (-132.3664, 46.5417) -> (-85.1672, 111.5058) projected
  line L5 (-85.1672, -18.4224) -> (-132.3664, 46.5417) projected
  line L6 (-8.7974, 6.3917) -> (-85.1672, -18.4224) projected
  line L7 (-8.7974, 86.6917) -> (-8.7974, 6.3917) projected
  line L8 (-85.1672, 111.5058) -> (-8.7974, 86.6917) projected
  line L9 (-2.9869, 2.1701) -> (-87.3867, -25.2531)
  line L10 (-87.3867, -25.2531) -> (-139.5486, 46.5417)
  line L11 (-139.5486, 46.5417) -> (-87.3867, 118.3364)
  line L12 (-87.3867, 118.3364) -> (-2.9869, 90.9133)
  line L13 (-2.9869, 90.9133) -> (-2.9869, 2.1701)
  line L14 (36.2149, -26.3117) -> (-102.3604, -71.3375)
  line L15 (-102.3604, -71.3375) -> (-188.0047, 46.5417)
  line L16 (-188.0047, 46.5417) -> (-102.3604, 164.4209)
  line L17 (-102.3604, 164.4209) -> (36.2149, 119.3951)
  line L18 (36.2149, 119.3951) -> (36.2149, -26.3117)
  point P0 (-64.0591, 46.5417)
extrude "拉伸20" cut sketch "草图24" along normal blind 1000 contours L14 L15 L16 L17 L18 keep common part
sketch "草图25" plane through (84.9916, 170, 61.75) normal (0, 1, 0) x (1, 0, 0)
  line L0 (-117.4555, -38.1636) -> (-111.2271, -18.9947) projected
  line L1 (-84.9916, 61.75) -> (-117.4555, -38.1636)
  line L2 (-117.4555, -38.1636) -> (85.1695, -33.7238)
  line L3 (85.1695, -33.7238) -> (60.3666, 156.0873)
  line L4 (0, 123.5) -> (-16.3061, 111.6529) projected
  line L5 (60.3666, 156.0873) -> (0, 123.5)
  line L6 (0, 123.5) -> (-84.9916, 61.75)
extrude "拉伸21" cut sketch "草图25" against normal blind 200 keep common part
properties part number "花盆主体" material "尼龙 6/6"
